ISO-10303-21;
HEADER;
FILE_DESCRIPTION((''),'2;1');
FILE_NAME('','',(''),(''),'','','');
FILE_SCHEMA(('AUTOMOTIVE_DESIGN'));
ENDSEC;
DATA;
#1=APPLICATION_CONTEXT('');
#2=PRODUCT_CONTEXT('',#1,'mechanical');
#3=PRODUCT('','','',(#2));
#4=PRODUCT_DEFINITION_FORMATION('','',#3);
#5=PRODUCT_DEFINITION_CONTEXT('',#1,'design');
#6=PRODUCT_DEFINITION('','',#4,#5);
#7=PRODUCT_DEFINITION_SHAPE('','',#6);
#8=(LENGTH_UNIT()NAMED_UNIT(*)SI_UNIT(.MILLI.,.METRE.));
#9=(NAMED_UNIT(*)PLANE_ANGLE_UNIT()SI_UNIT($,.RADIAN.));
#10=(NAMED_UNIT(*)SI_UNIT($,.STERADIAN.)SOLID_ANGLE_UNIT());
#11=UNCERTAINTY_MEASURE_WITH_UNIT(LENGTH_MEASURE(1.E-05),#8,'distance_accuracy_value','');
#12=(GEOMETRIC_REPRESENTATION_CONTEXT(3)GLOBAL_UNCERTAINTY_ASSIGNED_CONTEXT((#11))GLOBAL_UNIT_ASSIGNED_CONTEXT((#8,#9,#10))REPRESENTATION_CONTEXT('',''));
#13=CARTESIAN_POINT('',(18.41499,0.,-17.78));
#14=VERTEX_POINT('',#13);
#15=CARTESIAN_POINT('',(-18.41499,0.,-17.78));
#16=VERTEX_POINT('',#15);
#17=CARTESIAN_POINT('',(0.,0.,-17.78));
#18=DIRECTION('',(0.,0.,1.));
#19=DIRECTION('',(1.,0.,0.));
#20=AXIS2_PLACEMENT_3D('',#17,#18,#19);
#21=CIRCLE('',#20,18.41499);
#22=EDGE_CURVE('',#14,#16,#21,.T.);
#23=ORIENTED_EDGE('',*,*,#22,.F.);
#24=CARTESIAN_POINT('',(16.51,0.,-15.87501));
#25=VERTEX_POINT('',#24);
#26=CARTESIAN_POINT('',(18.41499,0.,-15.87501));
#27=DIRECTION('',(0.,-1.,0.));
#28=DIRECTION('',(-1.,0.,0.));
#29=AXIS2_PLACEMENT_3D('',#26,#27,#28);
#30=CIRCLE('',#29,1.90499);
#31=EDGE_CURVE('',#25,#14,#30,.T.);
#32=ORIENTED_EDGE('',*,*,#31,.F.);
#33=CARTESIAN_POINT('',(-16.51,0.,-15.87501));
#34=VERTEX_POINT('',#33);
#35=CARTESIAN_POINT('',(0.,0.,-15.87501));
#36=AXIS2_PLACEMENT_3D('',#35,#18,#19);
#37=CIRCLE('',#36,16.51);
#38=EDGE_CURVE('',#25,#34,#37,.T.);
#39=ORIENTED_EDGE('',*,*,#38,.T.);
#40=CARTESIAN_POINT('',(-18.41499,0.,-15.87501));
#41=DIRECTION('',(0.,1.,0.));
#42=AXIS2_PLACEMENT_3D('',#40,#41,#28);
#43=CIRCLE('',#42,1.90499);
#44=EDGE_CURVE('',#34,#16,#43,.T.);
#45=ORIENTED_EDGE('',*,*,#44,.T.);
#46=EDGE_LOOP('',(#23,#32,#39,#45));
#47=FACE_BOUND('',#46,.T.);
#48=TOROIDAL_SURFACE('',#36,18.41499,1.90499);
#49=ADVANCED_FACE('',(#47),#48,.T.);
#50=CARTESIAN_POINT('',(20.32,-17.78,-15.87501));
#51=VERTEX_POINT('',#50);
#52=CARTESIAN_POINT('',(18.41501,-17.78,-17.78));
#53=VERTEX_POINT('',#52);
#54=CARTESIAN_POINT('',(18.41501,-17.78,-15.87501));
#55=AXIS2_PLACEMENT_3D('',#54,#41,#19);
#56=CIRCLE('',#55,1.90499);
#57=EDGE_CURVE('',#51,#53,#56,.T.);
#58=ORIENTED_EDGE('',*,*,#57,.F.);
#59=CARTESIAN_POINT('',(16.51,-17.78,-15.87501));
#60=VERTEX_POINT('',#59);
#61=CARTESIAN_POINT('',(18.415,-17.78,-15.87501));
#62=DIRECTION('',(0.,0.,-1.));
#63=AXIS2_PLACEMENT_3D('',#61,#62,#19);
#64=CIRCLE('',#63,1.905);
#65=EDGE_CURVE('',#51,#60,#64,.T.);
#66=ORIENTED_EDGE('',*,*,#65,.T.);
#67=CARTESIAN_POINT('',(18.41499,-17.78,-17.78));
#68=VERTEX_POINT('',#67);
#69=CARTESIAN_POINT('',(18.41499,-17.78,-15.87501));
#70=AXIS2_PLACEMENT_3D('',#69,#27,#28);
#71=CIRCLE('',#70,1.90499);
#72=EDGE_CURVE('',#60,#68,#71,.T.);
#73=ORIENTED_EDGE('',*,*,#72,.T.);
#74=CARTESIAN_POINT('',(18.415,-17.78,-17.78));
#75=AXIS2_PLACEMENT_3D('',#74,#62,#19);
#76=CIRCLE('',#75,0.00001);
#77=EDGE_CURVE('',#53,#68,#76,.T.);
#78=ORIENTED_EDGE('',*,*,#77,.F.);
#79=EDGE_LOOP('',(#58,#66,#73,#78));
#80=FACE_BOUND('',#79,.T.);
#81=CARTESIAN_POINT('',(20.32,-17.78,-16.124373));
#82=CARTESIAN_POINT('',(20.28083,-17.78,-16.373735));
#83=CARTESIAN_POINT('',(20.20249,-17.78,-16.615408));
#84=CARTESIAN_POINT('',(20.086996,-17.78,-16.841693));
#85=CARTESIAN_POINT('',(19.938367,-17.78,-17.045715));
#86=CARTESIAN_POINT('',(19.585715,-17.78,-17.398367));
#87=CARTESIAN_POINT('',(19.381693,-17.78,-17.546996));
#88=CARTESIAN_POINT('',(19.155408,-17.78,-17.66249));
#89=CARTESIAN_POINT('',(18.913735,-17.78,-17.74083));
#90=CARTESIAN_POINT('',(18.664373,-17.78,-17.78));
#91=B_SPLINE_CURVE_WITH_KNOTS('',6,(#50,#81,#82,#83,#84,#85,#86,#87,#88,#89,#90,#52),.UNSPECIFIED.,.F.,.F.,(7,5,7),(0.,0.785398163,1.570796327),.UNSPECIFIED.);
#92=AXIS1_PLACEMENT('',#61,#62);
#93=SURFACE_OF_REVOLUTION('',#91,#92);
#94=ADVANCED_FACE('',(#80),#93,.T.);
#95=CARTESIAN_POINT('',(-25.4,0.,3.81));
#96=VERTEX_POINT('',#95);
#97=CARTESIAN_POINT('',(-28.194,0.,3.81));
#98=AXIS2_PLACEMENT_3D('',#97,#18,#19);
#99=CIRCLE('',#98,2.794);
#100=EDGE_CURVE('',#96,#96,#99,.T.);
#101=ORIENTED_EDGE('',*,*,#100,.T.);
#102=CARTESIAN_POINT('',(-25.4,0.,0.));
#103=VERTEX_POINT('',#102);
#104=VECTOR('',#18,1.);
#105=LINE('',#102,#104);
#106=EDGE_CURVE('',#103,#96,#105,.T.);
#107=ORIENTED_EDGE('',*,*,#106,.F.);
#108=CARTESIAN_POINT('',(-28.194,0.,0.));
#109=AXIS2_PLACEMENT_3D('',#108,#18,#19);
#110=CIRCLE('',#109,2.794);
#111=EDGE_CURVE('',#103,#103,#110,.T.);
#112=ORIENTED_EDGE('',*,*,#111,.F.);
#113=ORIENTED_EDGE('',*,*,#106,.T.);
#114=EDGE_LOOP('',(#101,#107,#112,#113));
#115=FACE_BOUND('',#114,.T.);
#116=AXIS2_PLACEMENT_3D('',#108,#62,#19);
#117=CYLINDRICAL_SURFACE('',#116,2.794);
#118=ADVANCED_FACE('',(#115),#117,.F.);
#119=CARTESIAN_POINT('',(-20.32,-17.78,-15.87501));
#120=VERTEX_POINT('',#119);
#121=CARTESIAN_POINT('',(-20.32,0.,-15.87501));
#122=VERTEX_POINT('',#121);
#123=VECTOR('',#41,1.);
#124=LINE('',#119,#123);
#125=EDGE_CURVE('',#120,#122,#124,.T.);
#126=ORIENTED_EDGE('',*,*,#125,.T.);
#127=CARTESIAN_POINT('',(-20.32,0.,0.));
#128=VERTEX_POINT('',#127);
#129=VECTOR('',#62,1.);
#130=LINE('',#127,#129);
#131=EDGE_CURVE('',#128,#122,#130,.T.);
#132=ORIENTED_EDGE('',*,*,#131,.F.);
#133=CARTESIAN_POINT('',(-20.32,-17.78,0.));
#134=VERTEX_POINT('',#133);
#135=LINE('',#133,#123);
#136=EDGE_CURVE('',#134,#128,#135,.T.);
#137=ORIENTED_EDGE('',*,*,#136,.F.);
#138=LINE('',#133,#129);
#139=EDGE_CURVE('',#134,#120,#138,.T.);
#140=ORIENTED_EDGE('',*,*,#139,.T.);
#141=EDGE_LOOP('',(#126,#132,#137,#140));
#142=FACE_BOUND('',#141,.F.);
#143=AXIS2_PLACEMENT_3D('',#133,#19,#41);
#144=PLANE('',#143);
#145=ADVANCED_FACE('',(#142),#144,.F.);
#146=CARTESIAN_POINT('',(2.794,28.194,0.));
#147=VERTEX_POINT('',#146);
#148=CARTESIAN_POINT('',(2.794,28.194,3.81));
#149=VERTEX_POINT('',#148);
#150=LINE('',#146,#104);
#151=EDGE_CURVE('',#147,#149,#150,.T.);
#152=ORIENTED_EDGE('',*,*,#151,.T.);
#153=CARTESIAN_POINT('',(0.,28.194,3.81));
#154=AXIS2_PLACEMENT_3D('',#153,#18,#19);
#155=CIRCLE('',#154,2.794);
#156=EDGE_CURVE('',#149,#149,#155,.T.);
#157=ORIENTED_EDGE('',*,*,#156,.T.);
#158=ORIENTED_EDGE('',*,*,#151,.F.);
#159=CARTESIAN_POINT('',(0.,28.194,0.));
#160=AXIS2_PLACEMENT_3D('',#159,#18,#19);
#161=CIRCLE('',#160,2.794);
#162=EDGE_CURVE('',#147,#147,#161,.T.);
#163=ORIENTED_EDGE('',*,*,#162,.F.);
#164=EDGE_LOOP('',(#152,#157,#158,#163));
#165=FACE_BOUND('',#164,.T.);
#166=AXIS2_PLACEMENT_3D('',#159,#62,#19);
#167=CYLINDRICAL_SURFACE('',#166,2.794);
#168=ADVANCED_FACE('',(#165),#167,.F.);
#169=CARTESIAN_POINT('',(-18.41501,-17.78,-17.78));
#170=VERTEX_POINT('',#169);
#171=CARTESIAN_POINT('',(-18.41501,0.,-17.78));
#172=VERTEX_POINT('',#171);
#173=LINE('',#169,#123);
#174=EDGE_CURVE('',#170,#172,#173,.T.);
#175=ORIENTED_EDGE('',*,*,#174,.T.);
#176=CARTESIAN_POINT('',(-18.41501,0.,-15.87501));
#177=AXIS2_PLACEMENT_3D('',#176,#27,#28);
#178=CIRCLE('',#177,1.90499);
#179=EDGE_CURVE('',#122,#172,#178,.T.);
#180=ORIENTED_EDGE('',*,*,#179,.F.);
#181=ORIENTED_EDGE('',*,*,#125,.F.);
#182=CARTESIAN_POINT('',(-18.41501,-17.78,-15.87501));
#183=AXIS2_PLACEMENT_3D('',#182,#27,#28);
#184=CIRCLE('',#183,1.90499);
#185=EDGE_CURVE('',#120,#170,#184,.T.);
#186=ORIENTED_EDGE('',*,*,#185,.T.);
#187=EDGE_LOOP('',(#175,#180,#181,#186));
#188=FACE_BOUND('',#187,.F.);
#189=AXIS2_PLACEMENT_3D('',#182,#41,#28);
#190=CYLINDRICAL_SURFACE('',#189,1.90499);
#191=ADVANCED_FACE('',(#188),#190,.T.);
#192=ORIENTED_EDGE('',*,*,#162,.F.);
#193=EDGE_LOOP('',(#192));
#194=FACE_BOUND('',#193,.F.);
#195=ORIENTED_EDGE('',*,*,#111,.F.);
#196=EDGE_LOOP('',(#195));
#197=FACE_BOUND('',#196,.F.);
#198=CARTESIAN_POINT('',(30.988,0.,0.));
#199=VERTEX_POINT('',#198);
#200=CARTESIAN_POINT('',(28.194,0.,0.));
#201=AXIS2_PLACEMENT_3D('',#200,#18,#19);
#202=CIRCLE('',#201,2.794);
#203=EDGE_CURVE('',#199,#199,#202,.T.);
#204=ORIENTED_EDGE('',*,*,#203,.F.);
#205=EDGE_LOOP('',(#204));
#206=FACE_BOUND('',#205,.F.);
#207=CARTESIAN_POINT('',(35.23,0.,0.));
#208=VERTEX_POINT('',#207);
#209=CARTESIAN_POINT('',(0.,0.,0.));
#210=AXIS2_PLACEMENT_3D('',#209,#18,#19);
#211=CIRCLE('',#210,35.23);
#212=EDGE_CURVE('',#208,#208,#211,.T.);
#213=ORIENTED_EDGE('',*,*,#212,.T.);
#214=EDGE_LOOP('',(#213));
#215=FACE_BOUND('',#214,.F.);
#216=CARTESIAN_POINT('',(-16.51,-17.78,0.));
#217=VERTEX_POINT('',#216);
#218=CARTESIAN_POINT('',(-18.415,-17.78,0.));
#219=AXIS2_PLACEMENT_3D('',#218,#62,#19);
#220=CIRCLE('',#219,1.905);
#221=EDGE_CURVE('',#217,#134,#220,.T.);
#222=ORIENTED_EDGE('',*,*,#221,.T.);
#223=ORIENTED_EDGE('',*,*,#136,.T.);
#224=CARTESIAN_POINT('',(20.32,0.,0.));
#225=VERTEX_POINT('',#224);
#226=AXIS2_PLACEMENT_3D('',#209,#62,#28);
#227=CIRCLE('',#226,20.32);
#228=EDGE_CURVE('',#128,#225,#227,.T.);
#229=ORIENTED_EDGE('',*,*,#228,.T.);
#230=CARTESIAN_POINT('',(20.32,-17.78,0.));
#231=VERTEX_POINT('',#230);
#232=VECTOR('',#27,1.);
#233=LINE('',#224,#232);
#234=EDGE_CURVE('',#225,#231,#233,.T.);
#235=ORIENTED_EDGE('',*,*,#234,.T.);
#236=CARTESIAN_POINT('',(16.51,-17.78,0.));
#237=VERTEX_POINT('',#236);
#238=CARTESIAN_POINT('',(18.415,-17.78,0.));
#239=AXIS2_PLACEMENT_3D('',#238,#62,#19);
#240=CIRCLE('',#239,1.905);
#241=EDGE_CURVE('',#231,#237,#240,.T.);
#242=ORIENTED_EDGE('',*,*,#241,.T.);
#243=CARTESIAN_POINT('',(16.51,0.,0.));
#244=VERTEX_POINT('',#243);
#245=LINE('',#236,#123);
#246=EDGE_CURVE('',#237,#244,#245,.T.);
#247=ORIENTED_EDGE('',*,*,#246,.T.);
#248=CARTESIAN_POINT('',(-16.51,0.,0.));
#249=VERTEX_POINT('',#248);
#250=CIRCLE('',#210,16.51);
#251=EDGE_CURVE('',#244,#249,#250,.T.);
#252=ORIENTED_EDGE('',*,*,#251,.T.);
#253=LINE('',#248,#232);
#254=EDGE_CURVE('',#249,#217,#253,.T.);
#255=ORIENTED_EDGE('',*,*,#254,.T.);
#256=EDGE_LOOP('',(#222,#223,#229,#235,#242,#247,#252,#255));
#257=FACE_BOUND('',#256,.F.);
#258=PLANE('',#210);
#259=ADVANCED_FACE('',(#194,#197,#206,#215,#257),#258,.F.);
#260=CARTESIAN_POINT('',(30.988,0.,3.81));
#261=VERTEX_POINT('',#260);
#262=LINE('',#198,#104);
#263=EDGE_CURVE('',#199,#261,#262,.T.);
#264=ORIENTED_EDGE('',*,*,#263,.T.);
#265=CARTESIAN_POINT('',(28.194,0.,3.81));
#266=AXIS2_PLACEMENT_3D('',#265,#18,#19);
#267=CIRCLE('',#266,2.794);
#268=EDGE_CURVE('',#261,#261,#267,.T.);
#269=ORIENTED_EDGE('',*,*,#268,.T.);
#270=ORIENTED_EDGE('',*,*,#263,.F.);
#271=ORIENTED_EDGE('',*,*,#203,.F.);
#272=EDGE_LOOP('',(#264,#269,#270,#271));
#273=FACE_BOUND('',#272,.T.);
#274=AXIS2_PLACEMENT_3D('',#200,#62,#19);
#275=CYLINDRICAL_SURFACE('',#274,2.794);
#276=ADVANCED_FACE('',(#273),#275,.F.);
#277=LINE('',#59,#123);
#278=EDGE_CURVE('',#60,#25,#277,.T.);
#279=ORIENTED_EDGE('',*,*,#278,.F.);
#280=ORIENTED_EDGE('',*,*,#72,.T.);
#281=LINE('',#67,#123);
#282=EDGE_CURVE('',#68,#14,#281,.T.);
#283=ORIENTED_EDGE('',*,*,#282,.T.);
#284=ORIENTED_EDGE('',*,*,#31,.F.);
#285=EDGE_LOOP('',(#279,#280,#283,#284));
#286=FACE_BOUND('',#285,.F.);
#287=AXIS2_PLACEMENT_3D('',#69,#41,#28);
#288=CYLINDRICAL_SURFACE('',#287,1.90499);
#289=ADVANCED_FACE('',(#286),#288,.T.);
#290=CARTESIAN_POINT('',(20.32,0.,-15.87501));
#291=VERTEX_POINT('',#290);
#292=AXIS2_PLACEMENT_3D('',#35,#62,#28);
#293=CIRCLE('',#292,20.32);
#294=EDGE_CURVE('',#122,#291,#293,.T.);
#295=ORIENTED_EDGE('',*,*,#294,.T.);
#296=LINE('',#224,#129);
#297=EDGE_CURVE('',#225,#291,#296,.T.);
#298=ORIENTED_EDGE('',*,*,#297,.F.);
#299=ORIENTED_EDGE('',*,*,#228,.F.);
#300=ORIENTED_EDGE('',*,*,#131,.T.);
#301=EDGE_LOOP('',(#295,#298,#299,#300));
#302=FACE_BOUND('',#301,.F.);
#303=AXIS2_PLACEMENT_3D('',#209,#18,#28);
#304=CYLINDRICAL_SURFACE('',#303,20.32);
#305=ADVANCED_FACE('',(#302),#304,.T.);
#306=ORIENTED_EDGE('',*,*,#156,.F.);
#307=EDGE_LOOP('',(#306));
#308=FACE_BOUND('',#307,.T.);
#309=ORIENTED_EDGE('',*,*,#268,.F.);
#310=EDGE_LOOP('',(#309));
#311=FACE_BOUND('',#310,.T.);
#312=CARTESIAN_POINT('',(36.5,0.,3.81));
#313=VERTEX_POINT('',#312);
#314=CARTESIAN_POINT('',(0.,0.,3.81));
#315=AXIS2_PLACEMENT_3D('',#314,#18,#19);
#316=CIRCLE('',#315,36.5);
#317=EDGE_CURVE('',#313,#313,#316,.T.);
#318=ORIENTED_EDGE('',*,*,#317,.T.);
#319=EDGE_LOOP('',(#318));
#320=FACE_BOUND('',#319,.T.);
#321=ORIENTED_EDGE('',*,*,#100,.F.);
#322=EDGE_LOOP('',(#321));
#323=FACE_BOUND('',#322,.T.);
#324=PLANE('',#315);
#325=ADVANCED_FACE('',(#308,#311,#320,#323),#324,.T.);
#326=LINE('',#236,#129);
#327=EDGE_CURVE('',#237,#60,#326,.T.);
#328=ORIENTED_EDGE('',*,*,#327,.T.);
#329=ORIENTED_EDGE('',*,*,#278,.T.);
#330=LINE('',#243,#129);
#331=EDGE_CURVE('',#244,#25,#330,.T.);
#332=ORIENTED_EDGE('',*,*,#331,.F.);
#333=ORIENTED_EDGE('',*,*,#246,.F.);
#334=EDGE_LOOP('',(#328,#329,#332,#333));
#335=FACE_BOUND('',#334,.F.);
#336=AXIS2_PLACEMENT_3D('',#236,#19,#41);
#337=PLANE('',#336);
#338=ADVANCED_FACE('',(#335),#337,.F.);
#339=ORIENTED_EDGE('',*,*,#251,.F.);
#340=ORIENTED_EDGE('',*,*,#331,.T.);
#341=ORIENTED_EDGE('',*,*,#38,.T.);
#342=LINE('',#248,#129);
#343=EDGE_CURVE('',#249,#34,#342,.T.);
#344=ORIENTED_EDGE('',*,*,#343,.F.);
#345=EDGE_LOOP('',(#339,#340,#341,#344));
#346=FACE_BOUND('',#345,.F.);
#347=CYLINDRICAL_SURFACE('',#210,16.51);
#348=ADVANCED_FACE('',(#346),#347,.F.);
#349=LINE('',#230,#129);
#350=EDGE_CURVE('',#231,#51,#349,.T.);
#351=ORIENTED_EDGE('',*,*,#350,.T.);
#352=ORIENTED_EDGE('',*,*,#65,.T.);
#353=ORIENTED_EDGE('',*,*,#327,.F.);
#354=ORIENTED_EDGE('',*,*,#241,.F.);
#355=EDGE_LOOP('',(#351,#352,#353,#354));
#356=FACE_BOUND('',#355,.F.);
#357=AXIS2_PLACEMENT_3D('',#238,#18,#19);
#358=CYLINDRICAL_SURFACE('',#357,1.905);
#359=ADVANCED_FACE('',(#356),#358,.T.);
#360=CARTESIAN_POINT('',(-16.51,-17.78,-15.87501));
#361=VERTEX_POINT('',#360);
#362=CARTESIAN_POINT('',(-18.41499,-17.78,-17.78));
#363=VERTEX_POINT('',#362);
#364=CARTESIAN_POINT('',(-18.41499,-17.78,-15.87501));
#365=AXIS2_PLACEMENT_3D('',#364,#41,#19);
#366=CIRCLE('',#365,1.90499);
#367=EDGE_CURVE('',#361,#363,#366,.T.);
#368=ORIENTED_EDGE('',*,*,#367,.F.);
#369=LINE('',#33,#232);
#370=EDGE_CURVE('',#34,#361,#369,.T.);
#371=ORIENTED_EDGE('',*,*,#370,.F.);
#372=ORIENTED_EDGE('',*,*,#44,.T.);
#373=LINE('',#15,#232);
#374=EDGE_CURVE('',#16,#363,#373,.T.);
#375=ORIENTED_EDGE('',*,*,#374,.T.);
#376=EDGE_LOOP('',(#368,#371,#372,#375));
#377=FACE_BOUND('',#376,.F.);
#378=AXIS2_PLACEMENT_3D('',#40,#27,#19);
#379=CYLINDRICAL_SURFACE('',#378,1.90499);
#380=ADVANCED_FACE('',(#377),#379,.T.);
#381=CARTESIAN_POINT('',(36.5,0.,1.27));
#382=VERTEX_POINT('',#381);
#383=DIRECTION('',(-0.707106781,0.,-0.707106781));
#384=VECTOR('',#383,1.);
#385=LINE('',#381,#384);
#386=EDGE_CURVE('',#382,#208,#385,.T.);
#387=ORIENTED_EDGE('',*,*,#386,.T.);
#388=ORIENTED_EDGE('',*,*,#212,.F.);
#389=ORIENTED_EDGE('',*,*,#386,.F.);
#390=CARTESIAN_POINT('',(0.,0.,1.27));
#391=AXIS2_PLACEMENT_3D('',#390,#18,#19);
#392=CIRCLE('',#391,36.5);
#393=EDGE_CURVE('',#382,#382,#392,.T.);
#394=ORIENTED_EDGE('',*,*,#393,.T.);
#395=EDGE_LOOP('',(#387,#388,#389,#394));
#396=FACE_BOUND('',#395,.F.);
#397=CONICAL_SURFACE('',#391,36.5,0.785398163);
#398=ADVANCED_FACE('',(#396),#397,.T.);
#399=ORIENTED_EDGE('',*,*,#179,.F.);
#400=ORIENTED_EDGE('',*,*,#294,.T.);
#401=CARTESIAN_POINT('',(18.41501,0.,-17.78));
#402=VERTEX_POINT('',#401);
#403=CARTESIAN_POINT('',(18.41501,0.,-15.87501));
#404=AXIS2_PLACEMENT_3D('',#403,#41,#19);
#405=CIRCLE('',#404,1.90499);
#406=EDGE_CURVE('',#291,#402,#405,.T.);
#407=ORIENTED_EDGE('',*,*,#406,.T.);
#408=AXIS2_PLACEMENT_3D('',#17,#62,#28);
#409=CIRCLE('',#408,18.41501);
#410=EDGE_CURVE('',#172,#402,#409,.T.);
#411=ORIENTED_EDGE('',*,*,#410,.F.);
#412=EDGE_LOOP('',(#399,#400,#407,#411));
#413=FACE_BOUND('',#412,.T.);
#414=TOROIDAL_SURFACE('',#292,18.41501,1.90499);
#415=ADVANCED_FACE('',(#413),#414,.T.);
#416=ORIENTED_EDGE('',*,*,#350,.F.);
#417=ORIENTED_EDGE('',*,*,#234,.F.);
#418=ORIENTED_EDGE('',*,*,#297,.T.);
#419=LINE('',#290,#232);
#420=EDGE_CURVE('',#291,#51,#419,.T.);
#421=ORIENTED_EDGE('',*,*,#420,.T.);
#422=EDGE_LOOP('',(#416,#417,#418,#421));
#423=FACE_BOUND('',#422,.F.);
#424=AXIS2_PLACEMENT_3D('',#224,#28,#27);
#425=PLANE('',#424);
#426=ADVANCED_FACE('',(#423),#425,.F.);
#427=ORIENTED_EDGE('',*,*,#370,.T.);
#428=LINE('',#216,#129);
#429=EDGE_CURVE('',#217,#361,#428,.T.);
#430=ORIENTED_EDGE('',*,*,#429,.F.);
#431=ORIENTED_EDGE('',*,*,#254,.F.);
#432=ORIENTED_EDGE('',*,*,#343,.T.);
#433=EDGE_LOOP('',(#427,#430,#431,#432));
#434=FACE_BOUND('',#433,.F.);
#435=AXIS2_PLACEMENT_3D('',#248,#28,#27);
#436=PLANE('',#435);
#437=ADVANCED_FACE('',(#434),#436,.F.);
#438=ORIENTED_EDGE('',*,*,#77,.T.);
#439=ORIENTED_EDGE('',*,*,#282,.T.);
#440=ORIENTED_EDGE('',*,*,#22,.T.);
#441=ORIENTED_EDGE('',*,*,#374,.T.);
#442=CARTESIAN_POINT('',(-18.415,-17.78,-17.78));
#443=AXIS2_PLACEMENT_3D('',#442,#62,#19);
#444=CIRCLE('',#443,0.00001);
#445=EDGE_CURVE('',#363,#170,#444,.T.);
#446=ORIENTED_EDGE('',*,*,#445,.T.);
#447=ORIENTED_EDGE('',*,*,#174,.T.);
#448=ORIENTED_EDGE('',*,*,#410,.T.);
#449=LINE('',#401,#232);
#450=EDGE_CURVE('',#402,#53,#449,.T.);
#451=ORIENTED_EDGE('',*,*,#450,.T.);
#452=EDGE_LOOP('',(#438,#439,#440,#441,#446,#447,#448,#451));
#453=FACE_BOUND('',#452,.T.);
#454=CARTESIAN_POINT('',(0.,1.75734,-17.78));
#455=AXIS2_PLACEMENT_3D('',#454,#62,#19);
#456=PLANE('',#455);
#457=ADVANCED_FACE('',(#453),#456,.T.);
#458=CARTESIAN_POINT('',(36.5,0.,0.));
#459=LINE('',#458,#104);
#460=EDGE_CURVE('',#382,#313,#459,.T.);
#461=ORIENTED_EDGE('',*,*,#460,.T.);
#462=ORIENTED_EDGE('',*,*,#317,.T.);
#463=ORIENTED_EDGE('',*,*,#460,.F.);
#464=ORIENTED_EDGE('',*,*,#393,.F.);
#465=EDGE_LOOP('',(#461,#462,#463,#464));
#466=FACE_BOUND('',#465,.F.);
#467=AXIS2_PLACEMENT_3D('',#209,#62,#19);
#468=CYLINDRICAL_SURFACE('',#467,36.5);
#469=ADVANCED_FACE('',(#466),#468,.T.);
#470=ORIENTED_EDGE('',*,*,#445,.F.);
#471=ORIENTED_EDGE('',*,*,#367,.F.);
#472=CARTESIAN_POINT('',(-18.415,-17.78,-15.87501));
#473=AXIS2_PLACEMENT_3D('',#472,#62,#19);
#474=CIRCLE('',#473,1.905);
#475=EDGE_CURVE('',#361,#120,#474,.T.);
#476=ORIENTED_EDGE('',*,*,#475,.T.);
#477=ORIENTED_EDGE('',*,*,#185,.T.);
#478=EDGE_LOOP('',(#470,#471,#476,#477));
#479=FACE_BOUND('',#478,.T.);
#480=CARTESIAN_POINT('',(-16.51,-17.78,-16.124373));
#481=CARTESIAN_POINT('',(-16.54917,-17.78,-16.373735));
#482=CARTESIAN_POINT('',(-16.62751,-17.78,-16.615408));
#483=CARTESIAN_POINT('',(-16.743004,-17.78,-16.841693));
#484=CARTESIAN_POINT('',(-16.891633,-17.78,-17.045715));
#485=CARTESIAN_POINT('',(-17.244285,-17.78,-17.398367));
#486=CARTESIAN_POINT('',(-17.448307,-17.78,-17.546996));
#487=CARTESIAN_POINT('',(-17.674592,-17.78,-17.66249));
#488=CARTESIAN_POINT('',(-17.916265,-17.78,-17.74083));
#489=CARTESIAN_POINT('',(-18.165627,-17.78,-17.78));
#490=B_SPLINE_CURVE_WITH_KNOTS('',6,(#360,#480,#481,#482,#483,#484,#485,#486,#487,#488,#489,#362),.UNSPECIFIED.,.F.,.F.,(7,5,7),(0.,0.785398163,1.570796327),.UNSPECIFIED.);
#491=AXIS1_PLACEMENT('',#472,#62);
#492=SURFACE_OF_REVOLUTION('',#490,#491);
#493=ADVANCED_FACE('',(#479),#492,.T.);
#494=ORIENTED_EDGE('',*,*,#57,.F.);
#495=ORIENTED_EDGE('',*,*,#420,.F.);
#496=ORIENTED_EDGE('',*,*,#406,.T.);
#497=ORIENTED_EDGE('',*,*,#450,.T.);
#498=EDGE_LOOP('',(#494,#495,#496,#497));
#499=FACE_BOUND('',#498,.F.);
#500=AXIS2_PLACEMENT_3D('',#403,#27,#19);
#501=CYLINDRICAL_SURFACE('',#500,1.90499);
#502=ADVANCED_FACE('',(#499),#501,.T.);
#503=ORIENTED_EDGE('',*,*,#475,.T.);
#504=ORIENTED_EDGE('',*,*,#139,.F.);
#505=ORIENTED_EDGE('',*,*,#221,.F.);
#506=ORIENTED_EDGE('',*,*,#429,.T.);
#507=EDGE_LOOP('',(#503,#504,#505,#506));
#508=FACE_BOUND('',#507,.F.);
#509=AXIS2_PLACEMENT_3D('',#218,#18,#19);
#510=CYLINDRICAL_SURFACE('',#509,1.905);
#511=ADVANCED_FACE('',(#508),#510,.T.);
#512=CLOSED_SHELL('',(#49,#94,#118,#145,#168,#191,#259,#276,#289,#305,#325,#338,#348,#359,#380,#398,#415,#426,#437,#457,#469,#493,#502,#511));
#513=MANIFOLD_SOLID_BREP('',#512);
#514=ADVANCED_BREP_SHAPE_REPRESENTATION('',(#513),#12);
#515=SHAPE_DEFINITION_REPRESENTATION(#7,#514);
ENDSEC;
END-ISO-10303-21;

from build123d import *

# Parameters (mm, degrees)
F0_R     = 36.5
F0_R_2   = 2.794
F1_DEPTH = 3.81
F2_SIZE  = 1.27
F4_DEPTH = 17.78
F5_R     = 1.90499


# Not quite as in the source:
# - a fillet or chamfer is up to 0.001 mm smaller than in the source, because OpenCascade refuses the exact size


with BuildPart() as f1:
    # F0 (on Top) → F1 (new body)
    with BuildSketch(Plane.XY):
        Circle(F0_R)
        with Locations((-28.194, 0)):
            Circle(F0_R_2, mode=Mode.SUBTRACT)
        with Locations((28.194, 0)):
            Circle(F0_R_2, mode=Mode.SUBTRACT)
        with Locations((0, 28.194)):
            Circle(F0_R_2, mode=Mode.SUBTRACT)
    extrude(amount=F1_DEPTH)

    # F2
    f2_edges = [f1.edges().sort_by_distance(p)[0] for p in [
        (-36.5, 0, 0),
    ]]
    chamfer(f2_edges, length=F2_SIZE)

    # F3 (on face) → F4 (join)
    with BuildSketch(Plane(origin=(0, 0, 0), x_dir=(1, 0, 0), z_dir=(0, 0, -1))):
        with BuildLine():
            Line((16.51, 17.78), (16.51, 0))
            ThreePointArc((16.51, 0), (0, -16.51), (-16.51, 0))
            Line((-16.51, 0), (-16.51, 17.78))
            ThreePointArc((-16.51, 17.78), (-18.415, 19.685), (-20.32, 17.78))
            Line((-20.32, 17.78), (-20.32, 0))
            ThreePointArc((-20.32, 0), (0, -20.32), (20.32, 0))
            Line((20.32, 0), (20.32, 17.78))
            ThreePointArc((20.32, 17.78), (18.415, 19.685), (16.51, 17.78))
        make_face()
    extrude(amount=F4_DEPTH)

    # F5 (radius 1.905 in the source; OpenCascade refuses exactly that, so slightly less here)
    f5_edges = [f1.edges().sort_by_distance(p)[0] for p in [
        (-20.32, -8.89, -17.78),
        (-16.51, -8.89, -17.78),
        (-18.415, -19.685, -17.78),
        (0, 20.32, -17.78),
        (0, 16.51, -17.78),
        (16.51, -8.89, -17.78),
        (20.32, -8.89, -17.78),
        (18.415, -19.685, -17.78),
    ]]
    fillet(f5_edges, radius=F5_R)


solid = f1.part
